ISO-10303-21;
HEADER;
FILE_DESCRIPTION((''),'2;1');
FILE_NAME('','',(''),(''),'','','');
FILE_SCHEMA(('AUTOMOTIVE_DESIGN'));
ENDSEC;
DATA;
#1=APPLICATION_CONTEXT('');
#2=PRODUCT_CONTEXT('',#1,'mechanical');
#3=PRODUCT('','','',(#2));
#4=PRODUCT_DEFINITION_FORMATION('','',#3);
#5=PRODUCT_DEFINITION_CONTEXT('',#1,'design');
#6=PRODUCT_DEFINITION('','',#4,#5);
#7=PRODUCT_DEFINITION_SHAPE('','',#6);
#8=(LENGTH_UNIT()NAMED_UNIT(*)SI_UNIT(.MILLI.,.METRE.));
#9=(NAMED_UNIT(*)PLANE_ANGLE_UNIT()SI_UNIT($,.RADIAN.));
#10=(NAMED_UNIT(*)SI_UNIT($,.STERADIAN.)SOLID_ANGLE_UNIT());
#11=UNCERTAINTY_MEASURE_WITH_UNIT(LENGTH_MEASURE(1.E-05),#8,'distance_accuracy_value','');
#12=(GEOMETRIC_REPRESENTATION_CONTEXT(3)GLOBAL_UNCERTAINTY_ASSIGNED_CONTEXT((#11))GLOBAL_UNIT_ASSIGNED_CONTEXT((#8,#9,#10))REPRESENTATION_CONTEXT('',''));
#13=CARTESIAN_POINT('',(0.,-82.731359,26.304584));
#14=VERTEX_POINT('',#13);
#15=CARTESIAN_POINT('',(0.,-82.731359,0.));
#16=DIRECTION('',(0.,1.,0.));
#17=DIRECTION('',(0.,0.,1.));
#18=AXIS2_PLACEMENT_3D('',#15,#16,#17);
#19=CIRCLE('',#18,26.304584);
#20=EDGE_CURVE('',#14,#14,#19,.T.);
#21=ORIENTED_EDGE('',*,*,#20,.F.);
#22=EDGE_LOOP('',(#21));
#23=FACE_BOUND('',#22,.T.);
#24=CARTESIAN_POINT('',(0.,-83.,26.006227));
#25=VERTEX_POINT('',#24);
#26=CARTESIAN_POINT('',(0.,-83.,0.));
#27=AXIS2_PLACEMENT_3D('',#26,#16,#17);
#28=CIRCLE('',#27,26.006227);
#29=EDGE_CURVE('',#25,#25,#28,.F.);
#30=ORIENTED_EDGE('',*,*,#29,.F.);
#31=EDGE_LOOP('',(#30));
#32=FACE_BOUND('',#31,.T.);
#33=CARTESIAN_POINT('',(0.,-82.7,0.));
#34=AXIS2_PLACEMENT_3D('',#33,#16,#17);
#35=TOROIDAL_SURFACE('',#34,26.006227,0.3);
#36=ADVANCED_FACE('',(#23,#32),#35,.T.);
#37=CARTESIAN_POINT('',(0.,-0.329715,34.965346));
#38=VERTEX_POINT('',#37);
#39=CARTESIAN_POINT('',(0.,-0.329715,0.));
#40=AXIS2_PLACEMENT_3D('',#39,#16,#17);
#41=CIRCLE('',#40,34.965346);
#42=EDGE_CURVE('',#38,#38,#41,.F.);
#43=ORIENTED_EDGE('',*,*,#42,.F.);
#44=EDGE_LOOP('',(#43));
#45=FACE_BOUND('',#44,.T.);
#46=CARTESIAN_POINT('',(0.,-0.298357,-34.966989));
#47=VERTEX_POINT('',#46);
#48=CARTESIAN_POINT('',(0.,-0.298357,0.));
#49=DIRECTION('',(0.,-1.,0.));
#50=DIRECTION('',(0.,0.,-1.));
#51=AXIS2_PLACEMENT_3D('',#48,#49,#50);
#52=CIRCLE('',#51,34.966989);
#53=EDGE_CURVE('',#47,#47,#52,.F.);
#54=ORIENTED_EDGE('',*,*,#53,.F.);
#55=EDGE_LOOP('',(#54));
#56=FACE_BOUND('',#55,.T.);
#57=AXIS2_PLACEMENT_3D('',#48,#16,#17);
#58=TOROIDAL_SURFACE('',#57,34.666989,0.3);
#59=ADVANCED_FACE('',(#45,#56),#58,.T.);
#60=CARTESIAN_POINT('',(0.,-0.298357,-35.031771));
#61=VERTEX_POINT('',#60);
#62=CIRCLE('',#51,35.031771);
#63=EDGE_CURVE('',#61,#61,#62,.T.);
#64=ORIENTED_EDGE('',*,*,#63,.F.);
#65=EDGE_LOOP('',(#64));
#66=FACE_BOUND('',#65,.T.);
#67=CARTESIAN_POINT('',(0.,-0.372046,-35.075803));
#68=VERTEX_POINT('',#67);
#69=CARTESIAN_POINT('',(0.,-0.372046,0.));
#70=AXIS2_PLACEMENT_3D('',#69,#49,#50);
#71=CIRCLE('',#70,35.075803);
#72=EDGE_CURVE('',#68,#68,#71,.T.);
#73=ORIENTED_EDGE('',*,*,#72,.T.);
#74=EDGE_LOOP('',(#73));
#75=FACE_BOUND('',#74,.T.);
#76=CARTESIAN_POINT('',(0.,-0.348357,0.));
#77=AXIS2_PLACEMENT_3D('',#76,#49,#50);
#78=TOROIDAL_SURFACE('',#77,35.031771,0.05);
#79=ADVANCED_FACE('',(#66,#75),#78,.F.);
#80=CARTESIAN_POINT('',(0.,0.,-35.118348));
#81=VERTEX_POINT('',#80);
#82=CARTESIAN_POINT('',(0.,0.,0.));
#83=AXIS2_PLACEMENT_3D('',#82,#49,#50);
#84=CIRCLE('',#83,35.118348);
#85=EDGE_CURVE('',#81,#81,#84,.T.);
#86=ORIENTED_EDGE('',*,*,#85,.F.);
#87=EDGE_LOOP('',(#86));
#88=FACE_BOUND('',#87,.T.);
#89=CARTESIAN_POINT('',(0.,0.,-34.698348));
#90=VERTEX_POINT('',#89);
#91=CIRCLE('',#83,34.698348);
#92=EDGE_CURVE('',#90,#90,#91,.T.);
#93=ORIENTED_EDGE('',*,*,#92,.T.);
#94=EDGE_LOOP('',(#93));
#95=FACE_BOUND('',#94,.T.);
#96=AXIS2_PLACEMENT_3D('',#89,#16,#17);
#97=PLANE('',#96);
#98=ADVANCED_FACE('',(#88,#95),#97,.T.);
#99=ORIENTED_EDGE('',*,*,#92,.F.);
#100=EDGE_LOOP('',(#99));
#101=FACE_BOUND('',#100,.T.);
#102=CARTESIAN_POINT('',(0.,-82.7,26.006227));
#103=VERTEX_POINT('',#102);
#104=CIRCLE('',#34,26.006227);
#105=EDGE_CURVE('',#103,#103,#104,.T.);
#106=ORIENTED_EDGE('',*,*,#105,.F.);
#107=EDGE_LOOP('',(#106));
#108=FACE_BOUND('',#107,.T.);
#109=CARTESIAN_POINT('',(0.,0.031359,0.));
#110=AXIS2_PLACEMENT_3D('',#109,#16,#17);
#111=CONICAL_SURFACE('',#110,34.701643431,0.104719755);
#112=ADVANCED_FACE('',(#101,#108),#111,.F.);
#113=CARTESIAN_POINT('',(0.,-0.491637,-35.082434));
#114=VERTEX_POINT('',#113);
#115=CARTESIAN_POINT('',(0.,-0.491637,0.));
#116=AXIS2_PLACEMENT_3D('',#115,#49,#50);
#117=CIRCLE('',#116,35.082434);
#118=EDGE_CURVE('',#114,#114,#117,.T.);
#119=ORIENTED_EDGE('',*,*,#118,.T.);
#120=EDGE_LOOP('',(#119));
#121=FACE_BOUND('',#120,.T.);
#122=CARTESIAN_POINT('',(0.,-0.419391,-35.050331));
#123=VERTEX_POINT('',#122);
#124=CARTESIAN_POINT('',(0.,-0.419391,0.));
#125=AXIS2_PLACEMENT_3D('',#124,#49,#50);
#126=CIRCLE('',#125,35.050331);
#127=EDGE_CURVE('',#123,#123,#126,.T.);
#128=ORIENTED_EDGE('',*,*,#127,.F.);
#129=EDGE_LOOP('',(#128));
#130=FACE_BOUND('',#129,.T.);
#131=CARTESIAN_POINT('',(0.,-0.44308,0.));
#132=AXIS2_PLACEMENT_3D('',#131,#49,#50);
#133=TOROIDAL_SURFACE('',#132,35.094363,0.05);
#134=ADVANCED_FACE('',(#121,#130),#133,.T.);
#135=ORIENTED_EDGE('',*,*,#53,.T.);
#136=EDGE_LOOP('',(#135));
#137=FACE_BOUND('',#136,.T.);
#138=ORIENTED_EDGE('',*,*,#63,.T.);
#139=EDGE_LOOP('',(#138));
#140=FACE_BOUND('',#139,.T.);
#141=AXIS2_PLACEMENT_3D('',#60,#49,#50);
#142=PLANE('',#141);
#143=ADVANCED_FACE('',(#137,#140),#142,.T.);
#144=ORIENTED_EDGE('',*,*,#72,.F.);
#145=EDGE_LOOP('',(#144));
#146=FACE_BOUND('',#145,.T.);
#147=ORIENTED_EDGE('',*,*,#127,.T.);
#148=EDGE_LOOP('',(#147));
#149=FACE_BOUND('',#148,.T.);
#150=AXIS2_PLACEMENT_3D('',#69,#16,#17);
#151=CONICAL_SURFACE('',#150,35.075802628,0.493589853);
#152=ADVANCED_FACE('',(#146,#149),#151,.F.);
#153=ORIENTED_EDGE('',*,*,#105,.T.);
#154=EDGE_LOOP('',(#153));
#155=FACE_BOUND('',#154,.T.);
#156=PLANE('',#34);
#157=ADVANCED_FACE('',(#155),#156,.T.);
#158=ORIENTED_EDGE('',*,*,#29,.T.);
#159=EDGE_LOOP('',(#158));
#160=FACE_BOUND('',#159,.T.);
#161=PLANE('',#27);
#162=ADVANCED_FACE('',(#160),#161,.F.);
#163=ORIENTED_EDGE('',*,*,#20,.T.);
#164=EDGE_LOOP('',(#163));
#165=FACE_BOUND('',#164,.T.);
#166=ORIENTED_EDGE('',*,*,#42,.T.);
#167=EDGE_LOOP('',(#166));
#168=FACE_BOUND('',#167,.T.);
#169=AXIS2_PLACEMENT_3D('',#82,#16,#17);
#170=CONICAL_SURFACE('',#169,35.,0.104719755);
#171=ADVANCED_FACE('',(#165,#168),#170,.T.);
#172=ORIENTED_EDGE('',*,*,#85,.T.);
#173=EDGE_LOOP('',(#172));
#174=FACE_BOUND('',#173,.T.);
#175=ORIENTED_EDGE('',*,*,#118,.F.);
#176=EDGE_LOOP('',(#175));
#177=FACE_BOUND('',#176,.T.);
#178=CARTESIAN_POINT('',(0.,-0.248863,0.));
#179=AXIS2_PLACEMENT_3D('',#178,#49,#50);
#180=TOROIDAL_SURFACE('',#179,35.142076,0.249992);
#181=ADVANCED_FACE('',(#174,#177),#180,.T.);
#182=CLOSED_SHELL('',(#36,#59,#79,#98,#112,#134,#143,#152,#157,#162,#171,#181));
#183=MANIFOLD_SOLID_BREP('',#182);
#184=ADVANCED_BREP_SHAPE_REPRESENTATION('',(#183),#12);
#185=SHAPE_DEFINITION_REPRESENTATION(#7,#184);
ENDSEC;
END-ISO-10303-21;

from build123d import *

# Parameters (mm, degrees)
SKETCH1_R           = 35
BOSS_EXTRUDE2_DEPTH = 83
BOSS_EXTRUDE2_DRAFT = -6
SHELL2_T            = -0.3
FILLET3_R           = 0.3


with BuildPart() as part:
    # Sketch1 → Boss-Extrude2 (with draft: the straight prism first)
    with BuildSketch(Plane(origin=(0, 0, 0), x_dir=(1, 0, 0), z_dir=(0, 1, 0))):
        Circle(SKETCH1_R)
    extrude(amount=-BOSS_EXTRUDE2_DEPTH)
    # Boss-Extrude2: the draft: its side faces are tilted about the plane it starts from
    boss_extrude2_sides = [part.faces().sort_by_distance(p)[0] for p in [
        (-35, -41.5, 0),
    ]]
    draft(boss_extrude2_sides, Plane(origin=(0, 0, 0), x_dir=(1, 0, 0), z_dir=(0, 1, 0)), BOSS_EXTRUDE2_DRAFT)

    # Shell2
    shell2_openings = [part.faces().sort_by_distance(p)[0] for p in [
        (0, 0, 0),
    ]]
    offset(amount=SHELL2_T, openings=shell2_openings, kind=Kind.INTERSECTION)

    # Fillet3
    # the kernel refuses this fillet: 0.3 mm, written as the material it takes off along each edge
    with BuildSketch(Plane(origin=(0, 0, 0), x_dir=(1, 0, 0), z_dir=(0, 0, 1))) as fillet3_piece_1:
        with BuildLine():
            CenterArc((34.666988977, -0.298356569), FILLET3_R, 354, 90)
            Line((34.698347516, 0), (34.698974687, 0.005967131))
            ThreePointArc((34.698974687, 0.005967131), (34.849173758, 0.006), (35, 0.006))
            Line((35, 0.006), (35.005967131, -0.000627171))
            Line((35.005967131, -0.000627171), (34.971312677, -0.330342278))
            Line((34.971312677, -0.330342278), (34.965345546, -0.329715108))
        make_face()
    revolve(axis=Axis((0, 0, 0), (0, 1, 0)), mode=Mode.SUBTRACT)
    with BuildSketch(Plane(origin=(0, -83, 0), x_dir=(1, 0, 0), z_dir=(0, 0, 1))) as fillet3_piece_2:
        with BuildLine():
            CenterArc((26.276348473 - FILLET3_R * 0.900404044298, FILLET3_R), FILLET3_R, 270, 84)
            Line((26.276348473 - FILLET3_R * 0.900404044298, 0), (26.276348473 - FILLET3_R * 0.900404044298, -FILLET3_R * 0.02))
            Line((26.276348473 - FILLET3_R * 0.900404044298, -FILLET3_R * 0.02), (26.276348473 + FILLET3_R * 0.018008080886, -FILLET3_R * 0.02))
            Line((26.276348473 + FILLET3_R * 0.018008080886, -FILLET3_R * 0.02), (26.276348473 + FILLET3_R * 0.114008288978, FILLET3_R * 0.893380967467))
            Line((26.276348473 + FILLET3_R * 0.114008288978, FILLET3_R * 0.893380967467), (26.276348473 + FILLET3_R * 0.0941178510704, FILLET3_R * 0.895471536732))
        make_face()
    revolve(axis=Axis((0, -83, 0), (0, 1, 0)), mode=Mode.SUBTRACT)

    # Sketch3 → Revolve1 (revolve)
    with BuildSketch(Plane(origin=(0, 0, 0), x_dir=(0, 0, -1), z_dir=(1, 0, 0)), mode=Mode.PRIVATE) as revolve1_sk:
        with BuildLine():
            Line((34.698347516, 0), (35.118347516, 0))
            ThreePointArc((35.118347516, 0), (35.391403641, -0.267076657), (35.082433767, -0.491636681))
            ThreePointArc((35.082433767, -0.491636681), (35.048670558, -0.463384181), (35.050330688, -0.419390977))
            Line((35.050330688, -0.419390977), (35.075802628, -0.372046083))
            ThreePointArc((35.075802628, -0.372046083), (35.074692042, -0.322709695), (35.031770744, -0.298356569))
            Line((35.031770744, -0.298356569), (34.966988977, -0.298356569))
            Line((34.966988977, -0.298356569), (34.698347516, 0))
        make_face()
    revolve(revolve1_sk.sketch.rotate(Axis((0, 0, 0), (0, 1, 0)), 180), axis=Axis((0, 0, 0), (0, 1, 0)))


solid = part.part
